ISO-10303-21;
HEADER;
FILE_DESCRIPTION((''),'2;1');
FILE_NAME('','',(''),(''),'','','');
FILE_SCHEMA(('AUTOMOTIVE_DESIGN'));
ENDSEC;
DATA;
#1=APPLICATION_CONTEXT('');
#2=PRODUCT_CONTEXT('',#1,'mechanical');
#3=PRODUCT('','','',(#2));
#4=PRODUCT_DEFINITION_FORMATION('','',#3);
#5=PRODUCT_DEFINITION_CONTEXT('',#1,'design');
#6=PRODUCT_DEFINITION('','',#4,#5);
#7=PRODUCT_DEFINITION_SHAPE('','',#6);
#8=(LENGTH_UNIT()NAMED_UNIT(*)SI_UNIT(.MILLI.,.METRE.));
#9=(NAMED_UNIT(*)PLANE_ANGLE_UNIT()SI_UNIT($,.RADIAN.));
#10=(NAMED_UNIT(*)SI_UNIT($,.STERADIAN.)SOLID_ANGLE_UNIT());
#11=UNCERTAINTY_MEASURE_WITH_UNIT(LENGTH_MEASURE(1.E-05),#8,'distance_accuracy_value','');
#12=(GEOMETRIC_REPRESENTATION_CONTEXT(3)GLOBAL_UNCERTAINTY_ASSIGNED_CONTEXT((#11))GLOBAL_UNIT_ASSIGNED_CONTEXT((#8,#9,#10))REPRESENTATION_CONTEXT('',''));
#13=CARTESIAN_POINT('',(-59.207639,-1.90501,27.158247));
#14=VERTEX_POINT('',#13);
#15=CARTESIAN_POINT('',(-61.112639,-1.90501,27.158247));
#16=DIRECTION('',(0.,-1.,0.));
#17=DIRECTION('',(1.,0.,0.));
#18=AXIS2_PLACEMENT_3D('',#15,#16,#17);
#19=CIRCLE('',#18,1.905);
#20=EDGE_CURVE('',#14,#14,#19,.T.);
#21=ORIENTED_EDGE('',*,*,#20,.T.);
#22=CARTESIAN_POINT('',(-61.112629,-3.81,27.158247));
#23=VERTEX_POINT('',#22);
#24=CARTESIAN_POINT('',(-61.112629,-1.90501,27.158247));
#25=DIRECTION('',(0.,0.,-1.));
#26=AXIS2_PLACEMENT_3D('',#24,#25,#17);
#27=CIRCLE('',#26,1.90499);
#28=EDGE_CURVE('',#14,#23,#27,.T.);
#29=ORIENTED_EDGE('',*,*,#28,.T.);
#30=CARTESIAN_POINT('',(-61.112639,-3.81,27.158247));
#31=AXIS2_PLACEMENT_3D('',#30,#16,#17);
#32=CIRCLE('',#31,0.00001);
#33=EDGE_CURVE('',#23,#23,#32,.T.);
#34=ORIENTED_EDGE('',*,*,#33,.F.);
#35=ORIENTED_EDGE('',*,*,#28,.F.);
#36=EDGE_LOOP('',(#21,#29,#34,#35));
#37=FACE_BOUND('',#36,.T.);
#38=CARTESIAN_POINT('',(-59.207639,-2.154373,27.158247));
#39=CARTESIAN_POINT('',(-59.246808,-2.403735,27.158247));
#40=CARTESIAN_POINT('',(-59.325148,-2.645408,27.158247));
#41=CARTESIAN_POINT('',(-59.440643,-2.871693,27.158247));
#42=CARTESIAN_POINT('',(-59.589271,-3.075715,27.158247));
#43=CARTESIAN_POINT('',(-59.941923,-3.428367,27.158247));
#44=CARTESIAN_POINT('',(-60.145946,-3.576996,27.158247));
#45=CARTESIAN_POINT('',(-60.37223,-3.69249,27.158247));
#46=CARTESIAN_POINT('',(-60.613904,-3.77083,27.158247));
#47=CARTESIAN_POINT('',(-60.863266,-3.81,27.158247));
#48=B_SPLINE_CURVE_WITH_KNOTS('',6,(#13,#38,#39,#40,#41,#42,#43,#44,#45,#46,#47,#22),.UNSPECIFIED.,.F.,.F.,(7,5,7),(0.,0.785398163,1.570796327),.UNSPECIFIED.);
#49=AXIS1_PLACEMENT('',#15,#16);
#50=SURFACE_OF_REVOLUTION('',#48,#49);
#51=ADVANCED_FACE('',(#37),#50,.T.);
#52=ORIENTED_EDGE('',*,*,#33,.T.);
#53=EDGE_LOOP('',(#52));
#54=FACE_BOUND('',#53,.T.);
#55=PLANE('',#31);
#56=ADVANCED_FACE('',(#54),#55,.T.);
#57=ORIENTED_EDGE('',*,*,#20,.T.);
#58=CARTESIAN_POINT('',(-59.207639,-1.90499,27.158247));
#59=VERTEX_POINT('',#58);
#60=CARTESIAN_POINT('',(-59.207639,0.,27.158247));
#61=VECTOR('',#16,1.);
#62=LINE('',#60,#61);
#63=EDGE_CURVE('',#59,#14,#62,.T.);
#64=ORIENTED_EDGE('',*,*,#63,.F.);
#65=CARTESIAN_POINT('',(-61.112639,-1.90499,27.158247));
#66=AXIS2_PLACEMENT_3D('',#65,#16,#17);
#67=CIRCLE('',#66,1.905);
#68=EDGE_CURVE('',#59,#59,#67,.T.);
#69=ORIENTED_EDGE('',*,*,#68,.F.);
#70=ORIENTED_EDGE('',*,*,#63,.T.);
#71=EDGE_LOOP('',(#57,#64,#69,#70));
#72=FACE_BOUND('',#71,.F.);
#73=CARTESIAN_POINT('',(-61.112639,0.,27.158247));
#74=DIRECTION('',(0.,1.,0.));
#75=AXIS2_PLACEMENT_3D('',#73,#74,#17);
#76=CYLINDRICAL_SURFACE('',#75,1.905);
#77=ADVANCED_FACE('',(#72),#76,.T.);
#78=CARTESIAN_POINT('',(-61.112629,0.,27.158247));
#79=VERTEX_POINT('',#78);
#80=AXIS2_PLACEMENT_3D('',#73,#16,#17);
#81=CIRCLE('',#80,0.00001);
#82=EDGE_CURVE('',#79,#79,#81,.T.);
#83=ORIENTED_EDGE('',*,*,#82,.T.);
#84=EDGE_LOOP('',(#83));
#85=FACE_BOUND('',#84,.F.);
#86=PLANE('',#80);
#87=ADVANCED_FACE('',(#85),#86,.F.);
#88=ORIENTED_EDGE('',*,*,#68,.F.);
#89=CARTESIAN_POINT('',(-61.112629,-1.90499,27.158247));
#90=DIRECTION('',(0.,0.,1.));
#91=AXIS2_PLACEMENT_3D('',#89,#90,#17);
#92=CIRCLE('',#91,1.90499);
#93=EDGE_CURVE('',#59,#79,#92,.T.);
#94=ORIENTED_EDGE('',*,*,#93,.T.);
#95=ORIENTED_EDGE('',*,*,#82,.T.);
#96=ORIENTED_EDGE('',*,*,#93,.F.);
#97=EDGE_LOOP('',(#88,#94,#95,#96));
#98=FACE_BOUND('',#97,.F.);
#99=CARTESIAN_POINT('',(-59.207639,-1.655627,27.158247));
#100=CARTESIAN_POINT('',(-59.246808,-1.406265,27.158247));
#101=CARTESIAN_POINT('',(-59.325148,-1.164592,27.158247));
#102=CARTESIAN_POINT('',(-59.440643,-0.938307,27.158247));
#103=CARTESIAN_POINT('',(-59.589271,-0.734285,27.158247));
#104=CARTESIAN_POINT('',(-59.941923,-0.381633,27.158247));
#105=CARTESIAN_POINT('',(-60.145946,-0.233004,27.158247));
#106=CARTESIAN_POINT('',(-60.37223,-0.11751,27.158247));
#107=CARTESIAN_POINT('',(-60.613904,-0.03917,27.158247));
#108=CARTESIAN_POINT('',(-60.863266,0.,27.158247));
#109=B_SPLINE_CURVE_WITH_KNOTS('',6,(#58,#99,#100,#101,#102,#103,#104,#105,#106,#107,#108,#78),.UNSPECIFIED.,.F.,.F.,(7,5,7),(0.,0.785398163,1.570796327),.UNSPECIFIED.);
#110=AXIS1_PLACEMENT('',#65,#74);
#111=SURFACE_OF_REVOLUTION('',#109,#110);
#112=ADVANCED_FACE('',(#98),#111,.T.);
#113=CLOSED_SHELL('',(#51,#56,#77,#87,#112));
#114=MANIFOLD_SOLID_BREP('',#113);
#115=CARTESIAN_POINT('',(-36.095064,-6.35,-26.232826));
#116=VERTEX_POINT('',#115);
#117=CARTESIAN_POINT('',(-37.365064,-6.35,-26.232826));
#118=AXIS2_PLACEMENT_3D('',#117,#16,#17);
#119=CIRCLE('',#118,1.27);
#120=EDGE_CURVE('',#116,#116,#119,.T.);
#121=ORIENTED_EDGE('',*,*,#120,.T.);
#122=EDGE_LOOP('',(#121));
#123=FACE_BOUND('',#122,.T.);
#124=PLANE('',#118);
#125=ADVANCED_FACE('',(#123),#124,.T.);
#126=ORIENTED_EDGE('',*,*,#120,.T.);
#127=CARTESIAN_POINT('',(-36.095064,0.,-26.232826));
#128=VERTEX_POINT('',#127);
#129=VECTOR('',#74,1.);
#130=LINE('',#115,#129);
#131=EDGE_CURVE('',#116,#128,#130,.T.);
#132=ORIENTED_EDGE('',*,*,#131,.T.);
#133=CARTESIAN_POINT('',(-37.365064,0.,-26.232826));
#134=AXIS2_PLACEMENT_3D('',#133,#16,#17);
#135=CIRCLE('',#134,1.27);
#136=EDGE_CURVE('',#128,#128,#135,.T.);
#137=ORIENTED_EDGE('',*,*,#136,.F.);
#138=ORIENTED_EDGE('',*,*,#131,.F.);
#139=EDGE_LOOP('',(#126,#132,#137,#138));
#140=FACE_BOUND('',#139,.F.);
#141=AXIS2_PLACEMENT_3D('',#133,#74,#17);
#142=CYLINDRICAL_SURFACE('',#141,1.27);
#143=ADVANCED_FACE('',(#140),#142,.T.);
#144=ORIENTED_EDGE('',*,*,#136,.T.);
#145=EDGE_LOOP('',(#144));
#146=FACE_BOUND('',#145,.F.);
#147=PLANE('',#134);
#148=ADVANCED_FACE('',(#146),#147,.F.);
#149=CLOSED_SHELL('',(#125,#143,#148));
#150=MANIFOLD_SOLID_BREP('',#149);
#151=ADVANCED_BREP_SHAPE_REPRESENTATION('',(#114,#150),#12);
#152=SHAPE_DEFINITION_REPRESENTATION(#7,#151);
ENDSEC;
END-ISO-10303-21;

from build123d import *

# Parameters (mm, degrees)
F0_R     = 1.27
F1_DEPTH = 6.35
F2_DEPTH = 3.81
F0_R_2   = 1.905
F3_R     = 1.90499


# Not quite as in the source:
# - a fillet or chamfer is up to 0.001 mm smaller than in the source, because OpenCascade refuses the exact size


with BuildPart() as f1:
    # F0 (on Front) → F1 (new body)
    with BuildSketch(Plane.XZ):
        with Locations((-37.3650640249, -26.2328255922)):
            Circle(F0_R)
    extrude(amount=F1_DEPTH)

    # F0 (on Front) → F2 (join)
    with BuildSketch(Plane.XZ):
        with Locations((-37.3650640249, -26.2328255922)):
            Circle(F0_R)
    extrude(amount=F2_DEPTH)


with BuildPart() as f2:
    # F0 (on Front) → F2, piece 2 (new body)
    with BuildSketch(Plane.XZ):
        with Locations((-61.1126385629, 27.1582473069)):
            Circle(F0_R_2)
    extrude(amount=F2_DEPTH)

    # F3 (radius 1.905 in the source; OpenCascade refuses exactly that, so slightly less here)
    f3_edges = [f2.edges().sort_by_distance(p)[0] for p in [
        (-63.017639, 0, 27.158247),
        (-63.017639, -3.81, 27.158247),
    ]]
    fillet(f3_edges, radius=F3_R)


solid = Compound([f1.part, f2.part])
